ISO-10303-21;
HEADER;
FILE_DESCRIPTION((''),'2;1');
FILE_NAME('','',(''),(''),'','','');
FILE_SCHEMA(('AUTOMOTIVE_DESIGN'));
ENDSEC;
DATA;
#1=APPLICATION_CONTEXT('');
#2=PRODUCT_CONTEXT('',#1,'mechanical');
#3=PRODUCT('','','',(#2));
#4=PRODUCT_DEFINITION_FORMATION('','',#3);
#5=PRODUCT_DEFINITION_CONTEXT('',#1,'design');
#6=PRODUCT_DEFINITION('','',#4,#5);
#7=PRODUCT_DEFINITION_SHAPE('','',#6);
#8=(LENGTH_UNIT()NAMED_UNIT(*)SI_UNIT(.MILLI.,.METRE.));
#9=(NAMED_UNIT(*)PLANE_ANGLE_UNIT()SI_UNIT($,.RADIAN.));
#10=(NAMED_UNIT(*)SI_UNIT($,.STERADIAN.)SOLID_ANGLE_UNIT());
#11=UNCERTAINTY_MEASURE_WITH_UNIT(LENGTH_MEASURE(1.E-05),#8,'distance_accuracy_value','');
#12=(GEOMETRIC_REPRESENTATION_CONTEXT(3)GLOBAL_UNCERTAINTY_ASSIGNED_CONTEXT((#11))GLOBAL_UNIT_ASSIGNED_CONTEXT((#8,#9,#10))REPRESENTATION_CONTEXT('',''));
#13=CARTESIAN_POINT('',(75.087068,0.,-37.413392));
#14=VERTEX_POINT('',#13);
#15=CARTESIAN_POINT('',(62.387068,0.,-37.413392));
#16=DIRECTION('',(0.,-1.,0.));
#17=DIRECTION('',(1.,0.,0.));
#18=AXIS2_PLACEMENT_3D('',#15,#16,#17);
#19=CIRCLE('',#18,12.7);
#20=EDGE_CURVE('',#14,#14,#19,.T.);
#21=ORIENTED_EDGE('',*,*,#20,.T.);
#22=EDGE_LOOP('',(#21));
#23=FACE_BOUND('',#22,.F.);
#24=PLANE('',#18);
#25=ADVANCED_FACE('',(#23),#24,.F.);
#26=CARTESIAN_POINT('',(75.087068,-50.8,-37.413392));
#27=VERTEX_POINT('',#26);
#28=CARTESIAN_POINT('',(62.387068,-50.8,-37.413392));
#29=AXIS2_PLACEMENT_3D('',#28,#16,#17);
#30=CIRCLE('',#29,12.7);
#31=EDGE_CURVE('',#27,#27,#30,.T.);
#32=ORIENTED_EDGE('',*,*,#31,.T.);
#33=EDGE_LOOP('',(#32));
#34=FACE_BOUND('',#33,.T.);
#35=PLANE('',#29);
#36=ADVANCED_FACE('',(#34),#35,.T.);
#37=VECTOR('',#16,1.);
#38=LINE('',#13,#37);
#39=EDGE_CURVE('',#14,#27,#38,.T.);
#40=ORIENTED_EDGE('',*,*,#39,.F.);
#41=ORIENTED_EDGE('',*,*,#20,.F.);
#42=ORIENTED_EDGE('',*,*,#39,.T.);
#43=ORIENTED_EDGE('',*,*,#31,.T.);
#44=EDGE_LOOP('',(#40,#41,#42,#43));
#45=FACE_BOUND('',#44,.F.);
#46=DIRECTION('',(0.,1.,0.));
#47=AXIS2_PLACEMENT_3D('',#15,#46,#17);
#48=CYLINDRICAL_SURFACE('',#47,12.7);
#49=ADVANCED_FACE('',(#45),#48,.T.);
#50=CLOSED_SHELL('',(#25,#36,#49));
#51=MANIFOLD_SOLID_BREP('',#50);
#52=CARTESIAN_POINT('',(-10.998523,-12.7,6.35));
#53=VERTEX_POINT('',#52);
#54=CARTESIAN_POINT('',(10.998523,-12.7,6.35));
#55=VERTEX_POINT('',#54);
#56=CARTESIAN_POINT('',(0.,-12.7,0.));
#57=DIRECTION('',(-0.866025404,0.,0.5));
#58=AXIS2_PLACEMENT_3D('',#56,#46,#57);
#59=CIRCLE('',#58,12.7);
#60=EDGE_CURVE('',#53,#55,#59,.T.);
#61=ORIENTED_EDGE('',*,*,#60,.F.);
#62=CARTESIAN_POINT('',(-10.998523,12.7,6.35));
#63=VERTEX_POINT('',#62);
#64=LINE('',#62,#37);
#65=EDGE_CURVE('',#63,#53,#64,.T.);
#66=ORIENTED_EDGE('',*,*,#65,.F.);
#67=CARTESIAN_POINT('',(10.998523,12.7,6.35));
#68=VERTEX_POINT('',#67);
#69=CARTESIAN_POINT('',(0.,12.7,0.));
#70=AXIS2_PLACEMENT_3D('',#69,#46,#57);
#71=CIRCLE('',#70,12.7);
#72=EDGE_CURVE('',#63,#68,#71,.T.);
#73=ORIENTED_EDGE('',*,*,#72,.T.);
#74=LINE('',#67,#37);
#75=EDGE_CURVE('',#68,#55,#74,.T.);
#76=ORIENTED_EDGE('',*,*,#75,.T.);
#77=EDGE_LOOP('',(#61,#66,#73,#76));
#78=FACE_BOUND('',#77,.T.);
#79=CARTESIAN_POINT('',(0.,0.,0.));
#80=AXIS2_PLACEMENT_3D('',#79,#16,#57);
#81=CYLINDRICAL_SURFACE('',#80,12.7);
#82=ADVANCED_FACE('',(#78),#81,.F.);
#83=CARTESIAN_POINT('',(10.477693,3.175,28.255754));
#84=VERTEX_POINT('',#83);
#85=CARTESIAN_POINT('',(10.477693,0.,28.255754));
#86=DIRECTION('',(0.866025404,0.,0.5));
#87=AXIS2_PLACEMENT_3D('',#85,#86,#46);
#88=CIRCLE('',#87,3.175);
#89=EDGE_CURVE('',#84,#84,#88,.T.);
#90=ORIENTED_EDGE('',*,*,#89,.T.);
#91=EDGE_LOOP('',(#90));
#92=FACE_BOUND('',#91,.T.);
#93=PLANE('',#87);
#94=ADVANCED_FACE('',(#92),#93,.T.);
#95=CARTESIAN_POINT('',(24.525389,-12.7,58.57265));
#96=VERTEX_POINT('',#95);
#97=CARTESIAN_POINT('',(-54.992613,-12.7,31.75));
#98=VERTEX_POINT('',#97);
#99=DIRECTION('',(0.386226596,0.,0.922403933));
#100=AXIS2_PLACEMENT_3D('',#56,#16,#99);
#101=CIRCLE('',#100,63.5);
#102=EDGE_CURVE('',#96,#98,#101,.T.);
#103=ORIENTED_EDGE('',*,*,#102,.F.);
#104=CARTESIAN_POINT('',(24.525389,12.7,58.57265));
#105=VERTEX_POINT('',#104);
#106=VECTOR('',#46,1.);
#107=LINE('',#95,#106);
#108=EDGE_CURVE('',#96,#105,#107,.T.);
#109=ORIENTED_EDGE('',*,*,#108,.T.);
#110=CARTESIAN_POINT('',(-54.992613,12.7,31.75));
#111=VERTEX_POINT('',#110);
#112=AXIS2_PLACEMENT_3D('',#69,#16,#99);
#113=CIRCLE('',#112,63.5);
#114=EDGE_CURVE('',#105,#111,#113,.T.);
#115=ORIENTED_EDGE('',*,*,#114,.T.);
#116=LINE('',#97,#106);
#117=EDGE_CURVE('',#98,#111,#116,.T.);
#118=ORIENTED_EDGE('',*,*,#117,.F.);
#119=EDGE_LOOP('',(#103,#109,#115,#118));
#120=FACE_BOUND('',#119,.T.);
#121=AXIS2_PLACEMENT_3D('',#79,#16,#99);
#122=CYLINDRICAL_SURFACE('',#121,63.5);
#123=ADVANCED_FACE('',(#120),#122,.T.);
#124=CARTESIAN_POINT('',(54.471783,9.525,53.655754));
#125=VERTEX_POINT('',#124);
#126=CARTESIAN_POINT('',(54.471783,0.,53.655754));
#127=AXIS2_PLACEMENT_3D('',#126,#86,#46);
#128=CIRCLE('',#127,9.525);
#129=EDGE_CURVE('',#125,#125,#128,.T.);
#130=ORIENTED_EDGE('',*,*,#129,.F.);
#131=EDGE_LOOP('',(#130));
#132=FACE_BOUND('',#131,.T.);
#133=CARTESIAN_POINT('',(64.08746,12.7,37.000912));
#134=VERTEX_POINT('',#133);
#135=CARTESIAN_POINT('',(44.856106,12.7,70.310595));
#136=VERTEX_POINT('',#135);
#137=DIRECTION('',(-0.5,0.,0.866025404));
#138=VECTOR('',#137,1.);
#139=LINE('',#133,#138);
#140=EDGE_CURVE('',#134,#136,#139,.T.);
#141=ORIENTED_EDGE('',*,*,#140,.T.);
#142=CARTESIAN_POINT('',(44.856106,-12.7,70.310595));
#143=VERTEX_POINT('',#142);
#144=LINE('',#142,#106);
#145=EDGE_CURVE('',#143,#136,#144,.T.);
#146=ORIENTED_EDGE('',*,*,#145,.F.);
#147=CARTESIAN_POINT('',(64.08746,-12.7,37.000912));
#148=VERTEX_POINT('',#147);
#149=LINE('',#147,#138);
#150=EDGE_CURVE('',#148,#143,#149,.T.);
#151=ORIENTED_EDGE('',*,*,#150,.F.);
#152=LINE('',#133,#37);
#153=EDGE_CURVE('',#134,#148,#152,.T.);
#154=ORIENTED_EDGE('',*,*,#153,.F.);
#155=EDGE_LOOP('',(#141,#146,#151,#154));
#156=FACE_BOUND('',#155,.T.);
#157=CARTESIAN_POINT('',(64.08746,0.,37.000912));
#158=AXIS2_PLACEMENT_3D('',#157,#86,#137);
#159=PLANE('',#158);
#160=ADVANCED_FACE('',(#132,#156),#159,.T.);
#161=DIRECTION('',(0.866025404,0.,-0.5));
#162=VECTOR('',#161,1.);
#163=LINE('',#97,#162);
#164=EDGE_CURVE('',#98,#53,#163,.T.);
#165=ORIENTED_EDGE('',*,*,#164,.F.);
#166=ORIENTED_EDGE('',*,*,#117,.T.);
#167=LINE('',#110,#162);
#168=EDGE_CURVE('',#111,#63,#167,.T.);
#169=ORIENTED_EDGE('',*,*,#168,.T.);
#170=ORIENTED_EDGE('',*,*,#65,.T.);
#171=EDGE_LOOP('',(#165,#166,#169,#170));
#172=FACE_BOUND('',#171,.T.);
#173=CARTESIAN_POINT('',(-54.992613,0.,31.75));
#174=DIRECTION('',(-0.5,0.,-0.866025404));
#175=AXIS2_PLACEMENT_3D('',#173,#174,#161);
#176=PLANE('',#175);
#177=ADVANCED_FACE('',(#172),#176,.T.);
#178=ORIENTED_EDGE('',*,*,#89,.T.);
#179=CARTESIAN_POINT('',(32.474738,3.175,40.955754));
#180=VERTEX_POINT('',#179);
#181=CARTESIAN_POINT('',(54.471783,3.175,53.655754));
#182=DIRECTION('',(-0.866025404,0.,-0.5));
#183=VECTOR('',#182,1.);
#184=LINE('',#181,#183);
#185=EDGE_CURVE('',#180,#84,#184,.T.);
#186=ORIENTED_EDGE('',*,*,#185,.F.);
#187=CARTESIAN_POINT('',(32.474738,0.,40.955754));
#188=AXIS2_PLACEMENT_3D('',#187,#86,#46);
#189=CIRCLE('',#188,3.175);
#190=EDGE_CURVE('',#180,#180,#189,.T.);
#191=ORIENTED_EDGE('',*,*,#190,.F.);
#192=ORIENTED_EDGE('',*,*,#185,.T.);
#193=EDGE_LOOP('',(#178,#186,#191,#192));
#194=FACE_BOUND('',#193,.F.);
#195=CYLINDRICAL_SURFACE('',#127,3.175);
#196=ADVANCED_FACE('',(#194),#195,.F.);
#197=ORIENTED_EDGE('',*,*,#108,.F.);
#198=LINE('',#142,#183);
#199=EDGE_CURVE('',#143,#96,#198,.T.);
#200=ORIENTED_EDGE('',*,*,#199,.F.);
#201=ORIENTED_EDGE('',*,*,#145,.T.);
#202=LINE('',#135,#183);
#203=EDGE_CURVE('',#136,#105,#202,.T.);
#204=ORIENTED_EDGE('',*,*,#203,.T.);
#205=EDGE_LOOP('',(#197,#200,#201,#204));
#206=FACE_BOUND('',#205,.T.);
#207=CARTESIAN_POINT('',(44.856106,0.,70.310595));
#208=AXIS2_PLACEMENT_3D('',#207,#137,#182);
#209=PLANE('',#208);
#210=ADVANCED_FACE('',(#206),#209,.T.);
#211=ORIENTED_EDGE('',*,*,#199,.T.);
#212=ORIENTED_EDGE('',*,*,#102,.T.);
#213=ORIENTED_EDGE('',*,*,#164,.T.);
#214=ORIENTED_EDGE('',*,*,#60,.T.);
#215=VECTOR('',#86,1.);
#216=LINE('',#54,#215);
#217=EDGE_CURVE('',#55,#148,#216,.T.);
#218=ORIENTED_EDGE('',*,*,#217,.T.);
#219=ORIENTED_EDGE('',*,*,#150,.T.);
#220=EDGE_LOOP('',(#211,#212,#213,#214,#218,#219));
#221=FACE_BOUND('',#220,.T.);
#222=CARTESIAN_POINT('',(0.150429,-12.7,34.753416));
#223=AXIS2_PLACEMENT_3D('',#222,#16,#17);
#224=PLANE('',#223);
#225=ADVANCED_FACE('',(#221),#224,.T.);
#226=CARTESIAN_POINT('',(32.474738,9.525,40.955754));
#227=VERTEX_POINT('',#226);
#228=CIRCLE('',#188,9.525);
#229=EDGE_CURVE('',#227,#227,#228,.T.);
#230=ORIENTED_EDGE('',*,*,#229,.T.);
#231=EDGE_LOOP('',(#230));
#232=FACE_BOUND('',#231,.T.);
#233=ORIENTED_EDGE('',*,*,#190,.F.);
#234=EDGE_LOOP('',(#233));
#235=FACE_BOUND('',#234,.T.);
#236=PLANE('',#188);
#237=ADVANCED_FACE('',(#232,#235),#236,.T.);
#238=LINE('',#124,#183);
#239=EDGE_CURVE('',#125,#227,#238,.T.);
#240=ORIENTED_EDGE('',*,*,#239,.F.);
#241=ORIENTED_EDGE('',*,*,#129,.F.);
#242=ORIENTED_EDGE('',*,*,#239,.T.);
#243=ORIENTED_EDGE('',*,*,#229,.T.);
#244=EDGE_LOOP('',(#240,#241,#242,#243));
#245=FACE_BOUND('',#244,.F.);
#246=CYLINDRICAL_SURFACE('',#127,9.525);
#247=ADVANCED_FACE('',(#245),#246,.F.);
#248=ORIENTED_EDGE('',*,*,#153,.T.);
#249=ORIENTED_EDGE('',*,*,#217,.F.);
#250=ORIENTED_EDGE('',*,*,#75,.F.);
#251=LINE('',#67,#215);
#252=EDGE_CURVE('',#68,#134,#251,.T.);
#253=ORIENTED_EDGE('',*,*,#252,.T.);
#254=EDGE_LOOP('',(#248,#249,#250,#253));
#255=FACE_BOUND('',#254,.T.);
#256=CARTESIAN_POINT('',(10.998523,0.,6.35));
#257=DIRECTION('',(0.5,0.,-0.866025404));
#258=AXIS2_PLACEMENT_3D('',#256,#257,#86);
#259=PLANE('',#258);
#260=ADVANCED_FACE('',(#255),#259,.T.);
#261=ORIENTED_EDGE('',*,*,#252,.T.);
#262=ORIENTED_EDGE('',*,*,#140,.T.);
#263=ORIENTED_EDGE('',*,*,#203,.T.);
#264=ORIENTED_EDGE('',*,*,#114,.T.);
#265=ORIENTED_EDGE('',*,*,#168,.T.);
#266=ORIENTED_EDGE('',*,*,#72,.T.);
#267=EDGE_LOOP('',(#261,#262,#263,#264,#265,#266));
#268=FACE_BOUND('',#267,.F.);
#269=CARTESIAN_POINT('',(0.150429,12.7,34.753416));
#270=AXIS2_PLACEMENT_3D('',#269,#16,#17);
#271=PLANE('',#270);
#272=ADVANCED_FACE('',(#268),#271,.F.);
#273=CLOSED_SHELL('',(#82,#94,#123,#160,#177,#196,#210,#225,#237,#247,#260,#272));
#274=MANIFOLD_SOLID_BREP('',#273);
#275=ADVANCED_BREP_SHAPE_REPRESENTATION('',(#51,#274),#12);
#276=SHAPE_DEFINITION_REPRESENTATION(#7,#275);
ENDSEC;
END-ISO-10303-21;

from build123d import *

# Parameters (mm, degrees)
F1_DEPTH = 12.7
F2_R     = 3.175
F3_DEPTH = 50.8
F2_R_2   = 9.525
F4_DEPTH = 25.4
F5_R     = 12.7
F6_DEPTH = 50.8


with BuildPart() as f1:
    # F0 (on Front) → F1 (new body, symmetric)
    with BuildSketch(Plane.XZ):
        with BuildLine():
            ThreePointArc((-10.9985226281, 6.35), (0, 12.7), (10.9985226281, 6.35))
            Line((10.9985226281, 6.35), (54.9926131403, 31.75))
            ThreePointArc((54.9926131403, 31.75), (41.960002336, 47.6613911249), (24.5253888692, 58.5726497677))
            ThreePointArc((24.5253888692, 58.5726497677), (-20.2959743259, 60.1691235283), (-54.9926131403, 31.75))
            Line((-54.9926131403, 31.75), (-10.9985226281, 6.35))
        make_face()
        with BuildLine():
            ThreePointArc((24.5253888692, 58.5726497677), (41.960002336, 47.6613911249), (54.9926131403, 31.75))
            Line((54.9926131403, 31.75), (64.087460216, 37.0009124074))
            Line((64.087460216, 37.0009124074), (44.8561061004, 70.310594834))
            Line((44.8561061004, 70.310594834), (24.5253888692, 58.5726497677))
        make_face()
    extrude(amount=F1_DEPTH, both=True)

    # F2 (on face) → F3 (cut)
    with BuildSketch(Plane(origin=(64.087460216, 0, 37.0009124074), x_dir=(0, 1, 0), z_dir=(0.8660254038, 0, 0.5))):
        with Locations((0, 19.2313541156)):
            Circle(F2_R)
    extrude(amount=-F3_DEPTH, mode=Mode.SUBTRACT)

    # F2 (on face) → F4 (cut)
    with BuildSketch(Plane(origin=(64.087460216, 0, 37.0009124074), x_dir=(0, 1, 0), z_dir=(0.8660254038, 0, 0.5))):
        with Locations((0, 19.2313541156)):
            Circle(F2_R_2)
        with Locations((0, 19.2313541156)):
            Circle(F2_R, mode=Mode.SUBTRACT)
    extrude(amount=-F4_DEPTH, mode=Mode.SUBTRACT)


with BuildPart() as f6:
    # F5 (on Front) → F6 (new body)
    with BuildSketch(Plane.XZ):
        with Locations((62.3870678246, -37.413392216)):
            Circle(F5_R)
    extrude(amount=F6_DEPTH)


solid = Compound([f1.part, f6.part])
